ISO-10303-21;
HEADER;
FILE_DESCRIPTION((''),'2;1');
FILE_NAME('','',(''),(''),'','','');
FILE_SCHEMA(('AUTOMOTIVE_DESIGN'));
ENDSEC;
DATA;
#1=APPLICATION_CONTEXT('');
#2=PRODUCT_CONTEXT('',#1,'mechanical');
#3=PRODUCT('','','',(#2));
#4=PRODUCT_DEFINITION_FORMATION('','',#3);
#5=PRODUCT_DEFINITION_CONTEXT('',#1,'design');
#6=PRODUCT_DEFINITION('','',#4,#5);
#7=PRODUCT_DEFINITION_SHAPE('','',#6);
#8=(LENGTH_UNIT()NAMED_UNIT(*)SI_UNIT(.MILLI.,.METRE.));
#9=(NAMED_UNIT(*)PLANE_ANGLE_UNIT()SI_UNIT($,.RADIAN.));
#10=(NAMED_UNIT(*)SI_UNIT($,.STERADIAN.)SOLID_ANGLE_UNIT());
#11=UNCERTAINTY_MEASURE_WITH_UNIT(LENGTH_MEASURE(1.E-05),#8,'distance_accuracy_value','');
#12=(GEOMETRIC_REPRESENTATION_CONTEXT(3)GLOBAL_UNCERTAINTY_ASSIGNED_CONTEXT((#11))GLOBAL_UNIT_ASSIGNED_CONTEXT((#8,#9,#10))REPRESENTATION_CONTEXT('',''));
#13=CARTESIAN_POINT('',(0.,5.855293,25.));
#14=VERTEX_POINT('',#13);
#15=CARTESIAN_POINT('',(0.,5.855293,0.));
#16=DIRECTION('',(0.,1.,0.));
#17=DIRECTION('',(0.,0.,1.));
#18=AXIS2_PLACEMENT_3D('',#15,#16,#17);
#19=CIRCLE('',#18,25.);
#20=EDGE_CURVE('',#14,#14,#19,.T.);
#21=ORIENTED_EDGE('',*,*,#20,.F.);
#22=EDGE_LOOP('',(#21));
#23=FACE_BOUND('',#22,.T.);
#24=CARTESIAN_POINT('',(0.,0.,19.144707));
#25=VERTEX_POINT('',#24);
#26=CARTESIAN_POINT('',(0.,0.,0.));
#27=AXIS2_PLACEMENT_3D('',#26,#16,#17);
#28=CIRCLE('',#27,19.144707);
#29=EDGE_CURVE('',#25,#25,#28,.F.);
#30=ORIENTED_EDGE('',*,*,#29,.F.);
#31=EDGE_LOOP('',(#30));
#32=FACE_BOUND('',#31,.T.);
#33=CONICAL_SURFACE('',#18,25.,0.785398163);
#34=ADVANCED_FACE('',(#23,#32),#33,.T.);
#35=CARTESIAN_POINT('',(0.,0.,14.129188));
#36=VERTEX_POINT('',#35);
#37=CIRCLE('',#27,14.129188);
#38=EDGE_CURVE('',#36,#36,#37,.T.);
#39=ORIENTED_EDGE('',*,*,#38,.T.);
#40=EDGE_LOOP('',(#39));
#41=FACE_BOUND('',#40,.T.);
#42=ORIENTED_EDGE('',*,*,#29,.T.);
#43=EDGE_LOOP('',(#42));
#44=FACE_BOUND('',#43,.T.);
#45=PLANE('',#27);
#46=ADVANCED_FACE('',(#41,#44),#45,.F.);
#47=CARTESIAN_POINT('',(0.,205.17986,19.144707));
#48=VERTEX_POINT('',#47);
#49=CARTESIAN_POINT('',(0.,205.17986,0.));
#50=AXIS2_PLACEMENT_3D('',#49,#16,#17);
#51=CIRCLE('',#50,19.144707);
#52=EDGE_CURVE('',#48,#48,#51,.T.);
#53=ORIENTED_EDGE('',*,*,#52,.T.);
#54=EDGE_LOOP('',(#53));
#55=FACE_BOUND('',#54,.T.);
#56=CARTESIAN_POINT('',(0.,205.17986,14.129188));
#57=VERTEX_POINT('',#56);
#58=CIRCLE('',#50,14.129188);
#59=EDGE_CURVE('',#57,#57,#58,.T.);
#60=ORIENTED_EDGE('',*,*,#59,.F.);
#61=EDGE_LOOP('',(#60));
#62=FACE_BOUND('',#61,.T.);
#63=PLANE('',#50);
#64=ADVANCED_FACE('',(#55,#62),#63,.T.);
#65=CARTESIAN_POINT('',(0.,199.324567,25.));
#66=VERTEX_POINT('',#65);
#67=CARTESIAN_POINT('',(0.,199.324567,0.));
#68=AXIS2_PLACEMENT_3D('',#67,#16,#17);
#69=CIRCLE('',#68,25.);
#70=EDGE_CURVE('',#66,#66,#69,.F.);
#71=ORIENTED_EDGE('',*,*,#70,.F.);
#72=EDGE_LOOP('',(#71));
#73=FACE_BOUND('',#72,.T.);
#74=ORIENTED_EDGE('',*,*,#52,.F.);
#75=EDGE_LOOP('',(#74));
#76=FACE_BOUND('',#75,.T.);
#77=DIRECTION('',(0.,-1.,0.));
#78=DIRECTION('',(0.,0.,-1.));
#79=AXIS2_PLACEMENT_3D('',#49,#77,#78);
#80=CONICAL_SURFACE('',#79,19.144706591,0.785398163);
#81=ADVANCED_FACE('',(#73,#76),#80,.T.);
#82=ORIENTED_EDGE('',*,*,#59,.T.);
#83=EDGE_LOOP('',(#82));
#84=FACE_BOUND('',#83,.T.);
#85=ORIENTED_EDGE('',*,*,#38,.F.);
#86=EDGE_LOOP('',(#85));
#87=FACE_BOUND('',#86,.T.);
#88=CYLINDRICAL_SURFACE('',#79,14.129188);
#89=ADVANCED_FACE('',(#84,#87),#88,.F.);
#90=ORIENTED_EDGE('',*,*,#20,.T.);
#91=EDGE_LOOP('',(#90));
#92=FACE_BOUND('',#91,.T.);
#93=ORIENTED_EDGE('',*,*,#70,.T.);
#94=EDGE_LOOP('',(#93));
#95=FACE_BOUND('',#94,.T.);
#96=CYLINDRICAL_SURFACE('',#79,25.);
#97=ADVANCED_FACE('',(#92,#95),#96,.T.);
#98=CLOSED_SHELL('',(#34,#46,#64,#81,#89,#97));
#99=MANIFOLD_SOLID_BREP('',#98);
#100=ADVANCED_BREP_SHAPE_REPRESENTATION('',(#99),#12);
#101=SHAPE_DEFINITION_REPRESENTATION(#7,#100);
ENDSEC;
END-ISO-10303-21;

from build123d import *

# Parameters (mm, degrees)
SKETCH1_R           = 25
BOSS_EXTRUDE1_DEPTH = 205.179860331
SKETCH2_R           = 14.129188118
CUT_EXTRUDE1_DEPTH  = 209.203686531
CHAMFER1_SIZE       = 5.855293409


with BuildPart() as part:
    # Sketch1 → Boss-Extrude1 (new body)
    with BuildSketch(Plane(origin=(0, 0, 0), x_dir=(1, 0, 0), z_dir=(0, 1, 0))):
        Circle(SKETCH1_R)
    extrude(amount=BOSS_EXTRUDE1_DEPTH)

    # Sketch2 → Cut-Extrude1 (cut, through all)
    with BuildSketch(Plane(origin=(0, 0, 0), x_dir=(1, 0, 0), z_dir=(0, 1, 0))):
        Circle(SKETCH2_R)
    extrude(amount=CUT_EXTRUDE1_DEPTH, mode=Mode.SUBTRACT)

    # Chamfer1
    chamfer1_edges = [part.edges().sort_by_distance(p)[0] for p in [
        (-25, 205.179860331, 0),
        (-25, 0, 0),
    ]]
    chamfer(chamfer1_edges, length=CHAMFER1_SIZE)


solid = part.part
